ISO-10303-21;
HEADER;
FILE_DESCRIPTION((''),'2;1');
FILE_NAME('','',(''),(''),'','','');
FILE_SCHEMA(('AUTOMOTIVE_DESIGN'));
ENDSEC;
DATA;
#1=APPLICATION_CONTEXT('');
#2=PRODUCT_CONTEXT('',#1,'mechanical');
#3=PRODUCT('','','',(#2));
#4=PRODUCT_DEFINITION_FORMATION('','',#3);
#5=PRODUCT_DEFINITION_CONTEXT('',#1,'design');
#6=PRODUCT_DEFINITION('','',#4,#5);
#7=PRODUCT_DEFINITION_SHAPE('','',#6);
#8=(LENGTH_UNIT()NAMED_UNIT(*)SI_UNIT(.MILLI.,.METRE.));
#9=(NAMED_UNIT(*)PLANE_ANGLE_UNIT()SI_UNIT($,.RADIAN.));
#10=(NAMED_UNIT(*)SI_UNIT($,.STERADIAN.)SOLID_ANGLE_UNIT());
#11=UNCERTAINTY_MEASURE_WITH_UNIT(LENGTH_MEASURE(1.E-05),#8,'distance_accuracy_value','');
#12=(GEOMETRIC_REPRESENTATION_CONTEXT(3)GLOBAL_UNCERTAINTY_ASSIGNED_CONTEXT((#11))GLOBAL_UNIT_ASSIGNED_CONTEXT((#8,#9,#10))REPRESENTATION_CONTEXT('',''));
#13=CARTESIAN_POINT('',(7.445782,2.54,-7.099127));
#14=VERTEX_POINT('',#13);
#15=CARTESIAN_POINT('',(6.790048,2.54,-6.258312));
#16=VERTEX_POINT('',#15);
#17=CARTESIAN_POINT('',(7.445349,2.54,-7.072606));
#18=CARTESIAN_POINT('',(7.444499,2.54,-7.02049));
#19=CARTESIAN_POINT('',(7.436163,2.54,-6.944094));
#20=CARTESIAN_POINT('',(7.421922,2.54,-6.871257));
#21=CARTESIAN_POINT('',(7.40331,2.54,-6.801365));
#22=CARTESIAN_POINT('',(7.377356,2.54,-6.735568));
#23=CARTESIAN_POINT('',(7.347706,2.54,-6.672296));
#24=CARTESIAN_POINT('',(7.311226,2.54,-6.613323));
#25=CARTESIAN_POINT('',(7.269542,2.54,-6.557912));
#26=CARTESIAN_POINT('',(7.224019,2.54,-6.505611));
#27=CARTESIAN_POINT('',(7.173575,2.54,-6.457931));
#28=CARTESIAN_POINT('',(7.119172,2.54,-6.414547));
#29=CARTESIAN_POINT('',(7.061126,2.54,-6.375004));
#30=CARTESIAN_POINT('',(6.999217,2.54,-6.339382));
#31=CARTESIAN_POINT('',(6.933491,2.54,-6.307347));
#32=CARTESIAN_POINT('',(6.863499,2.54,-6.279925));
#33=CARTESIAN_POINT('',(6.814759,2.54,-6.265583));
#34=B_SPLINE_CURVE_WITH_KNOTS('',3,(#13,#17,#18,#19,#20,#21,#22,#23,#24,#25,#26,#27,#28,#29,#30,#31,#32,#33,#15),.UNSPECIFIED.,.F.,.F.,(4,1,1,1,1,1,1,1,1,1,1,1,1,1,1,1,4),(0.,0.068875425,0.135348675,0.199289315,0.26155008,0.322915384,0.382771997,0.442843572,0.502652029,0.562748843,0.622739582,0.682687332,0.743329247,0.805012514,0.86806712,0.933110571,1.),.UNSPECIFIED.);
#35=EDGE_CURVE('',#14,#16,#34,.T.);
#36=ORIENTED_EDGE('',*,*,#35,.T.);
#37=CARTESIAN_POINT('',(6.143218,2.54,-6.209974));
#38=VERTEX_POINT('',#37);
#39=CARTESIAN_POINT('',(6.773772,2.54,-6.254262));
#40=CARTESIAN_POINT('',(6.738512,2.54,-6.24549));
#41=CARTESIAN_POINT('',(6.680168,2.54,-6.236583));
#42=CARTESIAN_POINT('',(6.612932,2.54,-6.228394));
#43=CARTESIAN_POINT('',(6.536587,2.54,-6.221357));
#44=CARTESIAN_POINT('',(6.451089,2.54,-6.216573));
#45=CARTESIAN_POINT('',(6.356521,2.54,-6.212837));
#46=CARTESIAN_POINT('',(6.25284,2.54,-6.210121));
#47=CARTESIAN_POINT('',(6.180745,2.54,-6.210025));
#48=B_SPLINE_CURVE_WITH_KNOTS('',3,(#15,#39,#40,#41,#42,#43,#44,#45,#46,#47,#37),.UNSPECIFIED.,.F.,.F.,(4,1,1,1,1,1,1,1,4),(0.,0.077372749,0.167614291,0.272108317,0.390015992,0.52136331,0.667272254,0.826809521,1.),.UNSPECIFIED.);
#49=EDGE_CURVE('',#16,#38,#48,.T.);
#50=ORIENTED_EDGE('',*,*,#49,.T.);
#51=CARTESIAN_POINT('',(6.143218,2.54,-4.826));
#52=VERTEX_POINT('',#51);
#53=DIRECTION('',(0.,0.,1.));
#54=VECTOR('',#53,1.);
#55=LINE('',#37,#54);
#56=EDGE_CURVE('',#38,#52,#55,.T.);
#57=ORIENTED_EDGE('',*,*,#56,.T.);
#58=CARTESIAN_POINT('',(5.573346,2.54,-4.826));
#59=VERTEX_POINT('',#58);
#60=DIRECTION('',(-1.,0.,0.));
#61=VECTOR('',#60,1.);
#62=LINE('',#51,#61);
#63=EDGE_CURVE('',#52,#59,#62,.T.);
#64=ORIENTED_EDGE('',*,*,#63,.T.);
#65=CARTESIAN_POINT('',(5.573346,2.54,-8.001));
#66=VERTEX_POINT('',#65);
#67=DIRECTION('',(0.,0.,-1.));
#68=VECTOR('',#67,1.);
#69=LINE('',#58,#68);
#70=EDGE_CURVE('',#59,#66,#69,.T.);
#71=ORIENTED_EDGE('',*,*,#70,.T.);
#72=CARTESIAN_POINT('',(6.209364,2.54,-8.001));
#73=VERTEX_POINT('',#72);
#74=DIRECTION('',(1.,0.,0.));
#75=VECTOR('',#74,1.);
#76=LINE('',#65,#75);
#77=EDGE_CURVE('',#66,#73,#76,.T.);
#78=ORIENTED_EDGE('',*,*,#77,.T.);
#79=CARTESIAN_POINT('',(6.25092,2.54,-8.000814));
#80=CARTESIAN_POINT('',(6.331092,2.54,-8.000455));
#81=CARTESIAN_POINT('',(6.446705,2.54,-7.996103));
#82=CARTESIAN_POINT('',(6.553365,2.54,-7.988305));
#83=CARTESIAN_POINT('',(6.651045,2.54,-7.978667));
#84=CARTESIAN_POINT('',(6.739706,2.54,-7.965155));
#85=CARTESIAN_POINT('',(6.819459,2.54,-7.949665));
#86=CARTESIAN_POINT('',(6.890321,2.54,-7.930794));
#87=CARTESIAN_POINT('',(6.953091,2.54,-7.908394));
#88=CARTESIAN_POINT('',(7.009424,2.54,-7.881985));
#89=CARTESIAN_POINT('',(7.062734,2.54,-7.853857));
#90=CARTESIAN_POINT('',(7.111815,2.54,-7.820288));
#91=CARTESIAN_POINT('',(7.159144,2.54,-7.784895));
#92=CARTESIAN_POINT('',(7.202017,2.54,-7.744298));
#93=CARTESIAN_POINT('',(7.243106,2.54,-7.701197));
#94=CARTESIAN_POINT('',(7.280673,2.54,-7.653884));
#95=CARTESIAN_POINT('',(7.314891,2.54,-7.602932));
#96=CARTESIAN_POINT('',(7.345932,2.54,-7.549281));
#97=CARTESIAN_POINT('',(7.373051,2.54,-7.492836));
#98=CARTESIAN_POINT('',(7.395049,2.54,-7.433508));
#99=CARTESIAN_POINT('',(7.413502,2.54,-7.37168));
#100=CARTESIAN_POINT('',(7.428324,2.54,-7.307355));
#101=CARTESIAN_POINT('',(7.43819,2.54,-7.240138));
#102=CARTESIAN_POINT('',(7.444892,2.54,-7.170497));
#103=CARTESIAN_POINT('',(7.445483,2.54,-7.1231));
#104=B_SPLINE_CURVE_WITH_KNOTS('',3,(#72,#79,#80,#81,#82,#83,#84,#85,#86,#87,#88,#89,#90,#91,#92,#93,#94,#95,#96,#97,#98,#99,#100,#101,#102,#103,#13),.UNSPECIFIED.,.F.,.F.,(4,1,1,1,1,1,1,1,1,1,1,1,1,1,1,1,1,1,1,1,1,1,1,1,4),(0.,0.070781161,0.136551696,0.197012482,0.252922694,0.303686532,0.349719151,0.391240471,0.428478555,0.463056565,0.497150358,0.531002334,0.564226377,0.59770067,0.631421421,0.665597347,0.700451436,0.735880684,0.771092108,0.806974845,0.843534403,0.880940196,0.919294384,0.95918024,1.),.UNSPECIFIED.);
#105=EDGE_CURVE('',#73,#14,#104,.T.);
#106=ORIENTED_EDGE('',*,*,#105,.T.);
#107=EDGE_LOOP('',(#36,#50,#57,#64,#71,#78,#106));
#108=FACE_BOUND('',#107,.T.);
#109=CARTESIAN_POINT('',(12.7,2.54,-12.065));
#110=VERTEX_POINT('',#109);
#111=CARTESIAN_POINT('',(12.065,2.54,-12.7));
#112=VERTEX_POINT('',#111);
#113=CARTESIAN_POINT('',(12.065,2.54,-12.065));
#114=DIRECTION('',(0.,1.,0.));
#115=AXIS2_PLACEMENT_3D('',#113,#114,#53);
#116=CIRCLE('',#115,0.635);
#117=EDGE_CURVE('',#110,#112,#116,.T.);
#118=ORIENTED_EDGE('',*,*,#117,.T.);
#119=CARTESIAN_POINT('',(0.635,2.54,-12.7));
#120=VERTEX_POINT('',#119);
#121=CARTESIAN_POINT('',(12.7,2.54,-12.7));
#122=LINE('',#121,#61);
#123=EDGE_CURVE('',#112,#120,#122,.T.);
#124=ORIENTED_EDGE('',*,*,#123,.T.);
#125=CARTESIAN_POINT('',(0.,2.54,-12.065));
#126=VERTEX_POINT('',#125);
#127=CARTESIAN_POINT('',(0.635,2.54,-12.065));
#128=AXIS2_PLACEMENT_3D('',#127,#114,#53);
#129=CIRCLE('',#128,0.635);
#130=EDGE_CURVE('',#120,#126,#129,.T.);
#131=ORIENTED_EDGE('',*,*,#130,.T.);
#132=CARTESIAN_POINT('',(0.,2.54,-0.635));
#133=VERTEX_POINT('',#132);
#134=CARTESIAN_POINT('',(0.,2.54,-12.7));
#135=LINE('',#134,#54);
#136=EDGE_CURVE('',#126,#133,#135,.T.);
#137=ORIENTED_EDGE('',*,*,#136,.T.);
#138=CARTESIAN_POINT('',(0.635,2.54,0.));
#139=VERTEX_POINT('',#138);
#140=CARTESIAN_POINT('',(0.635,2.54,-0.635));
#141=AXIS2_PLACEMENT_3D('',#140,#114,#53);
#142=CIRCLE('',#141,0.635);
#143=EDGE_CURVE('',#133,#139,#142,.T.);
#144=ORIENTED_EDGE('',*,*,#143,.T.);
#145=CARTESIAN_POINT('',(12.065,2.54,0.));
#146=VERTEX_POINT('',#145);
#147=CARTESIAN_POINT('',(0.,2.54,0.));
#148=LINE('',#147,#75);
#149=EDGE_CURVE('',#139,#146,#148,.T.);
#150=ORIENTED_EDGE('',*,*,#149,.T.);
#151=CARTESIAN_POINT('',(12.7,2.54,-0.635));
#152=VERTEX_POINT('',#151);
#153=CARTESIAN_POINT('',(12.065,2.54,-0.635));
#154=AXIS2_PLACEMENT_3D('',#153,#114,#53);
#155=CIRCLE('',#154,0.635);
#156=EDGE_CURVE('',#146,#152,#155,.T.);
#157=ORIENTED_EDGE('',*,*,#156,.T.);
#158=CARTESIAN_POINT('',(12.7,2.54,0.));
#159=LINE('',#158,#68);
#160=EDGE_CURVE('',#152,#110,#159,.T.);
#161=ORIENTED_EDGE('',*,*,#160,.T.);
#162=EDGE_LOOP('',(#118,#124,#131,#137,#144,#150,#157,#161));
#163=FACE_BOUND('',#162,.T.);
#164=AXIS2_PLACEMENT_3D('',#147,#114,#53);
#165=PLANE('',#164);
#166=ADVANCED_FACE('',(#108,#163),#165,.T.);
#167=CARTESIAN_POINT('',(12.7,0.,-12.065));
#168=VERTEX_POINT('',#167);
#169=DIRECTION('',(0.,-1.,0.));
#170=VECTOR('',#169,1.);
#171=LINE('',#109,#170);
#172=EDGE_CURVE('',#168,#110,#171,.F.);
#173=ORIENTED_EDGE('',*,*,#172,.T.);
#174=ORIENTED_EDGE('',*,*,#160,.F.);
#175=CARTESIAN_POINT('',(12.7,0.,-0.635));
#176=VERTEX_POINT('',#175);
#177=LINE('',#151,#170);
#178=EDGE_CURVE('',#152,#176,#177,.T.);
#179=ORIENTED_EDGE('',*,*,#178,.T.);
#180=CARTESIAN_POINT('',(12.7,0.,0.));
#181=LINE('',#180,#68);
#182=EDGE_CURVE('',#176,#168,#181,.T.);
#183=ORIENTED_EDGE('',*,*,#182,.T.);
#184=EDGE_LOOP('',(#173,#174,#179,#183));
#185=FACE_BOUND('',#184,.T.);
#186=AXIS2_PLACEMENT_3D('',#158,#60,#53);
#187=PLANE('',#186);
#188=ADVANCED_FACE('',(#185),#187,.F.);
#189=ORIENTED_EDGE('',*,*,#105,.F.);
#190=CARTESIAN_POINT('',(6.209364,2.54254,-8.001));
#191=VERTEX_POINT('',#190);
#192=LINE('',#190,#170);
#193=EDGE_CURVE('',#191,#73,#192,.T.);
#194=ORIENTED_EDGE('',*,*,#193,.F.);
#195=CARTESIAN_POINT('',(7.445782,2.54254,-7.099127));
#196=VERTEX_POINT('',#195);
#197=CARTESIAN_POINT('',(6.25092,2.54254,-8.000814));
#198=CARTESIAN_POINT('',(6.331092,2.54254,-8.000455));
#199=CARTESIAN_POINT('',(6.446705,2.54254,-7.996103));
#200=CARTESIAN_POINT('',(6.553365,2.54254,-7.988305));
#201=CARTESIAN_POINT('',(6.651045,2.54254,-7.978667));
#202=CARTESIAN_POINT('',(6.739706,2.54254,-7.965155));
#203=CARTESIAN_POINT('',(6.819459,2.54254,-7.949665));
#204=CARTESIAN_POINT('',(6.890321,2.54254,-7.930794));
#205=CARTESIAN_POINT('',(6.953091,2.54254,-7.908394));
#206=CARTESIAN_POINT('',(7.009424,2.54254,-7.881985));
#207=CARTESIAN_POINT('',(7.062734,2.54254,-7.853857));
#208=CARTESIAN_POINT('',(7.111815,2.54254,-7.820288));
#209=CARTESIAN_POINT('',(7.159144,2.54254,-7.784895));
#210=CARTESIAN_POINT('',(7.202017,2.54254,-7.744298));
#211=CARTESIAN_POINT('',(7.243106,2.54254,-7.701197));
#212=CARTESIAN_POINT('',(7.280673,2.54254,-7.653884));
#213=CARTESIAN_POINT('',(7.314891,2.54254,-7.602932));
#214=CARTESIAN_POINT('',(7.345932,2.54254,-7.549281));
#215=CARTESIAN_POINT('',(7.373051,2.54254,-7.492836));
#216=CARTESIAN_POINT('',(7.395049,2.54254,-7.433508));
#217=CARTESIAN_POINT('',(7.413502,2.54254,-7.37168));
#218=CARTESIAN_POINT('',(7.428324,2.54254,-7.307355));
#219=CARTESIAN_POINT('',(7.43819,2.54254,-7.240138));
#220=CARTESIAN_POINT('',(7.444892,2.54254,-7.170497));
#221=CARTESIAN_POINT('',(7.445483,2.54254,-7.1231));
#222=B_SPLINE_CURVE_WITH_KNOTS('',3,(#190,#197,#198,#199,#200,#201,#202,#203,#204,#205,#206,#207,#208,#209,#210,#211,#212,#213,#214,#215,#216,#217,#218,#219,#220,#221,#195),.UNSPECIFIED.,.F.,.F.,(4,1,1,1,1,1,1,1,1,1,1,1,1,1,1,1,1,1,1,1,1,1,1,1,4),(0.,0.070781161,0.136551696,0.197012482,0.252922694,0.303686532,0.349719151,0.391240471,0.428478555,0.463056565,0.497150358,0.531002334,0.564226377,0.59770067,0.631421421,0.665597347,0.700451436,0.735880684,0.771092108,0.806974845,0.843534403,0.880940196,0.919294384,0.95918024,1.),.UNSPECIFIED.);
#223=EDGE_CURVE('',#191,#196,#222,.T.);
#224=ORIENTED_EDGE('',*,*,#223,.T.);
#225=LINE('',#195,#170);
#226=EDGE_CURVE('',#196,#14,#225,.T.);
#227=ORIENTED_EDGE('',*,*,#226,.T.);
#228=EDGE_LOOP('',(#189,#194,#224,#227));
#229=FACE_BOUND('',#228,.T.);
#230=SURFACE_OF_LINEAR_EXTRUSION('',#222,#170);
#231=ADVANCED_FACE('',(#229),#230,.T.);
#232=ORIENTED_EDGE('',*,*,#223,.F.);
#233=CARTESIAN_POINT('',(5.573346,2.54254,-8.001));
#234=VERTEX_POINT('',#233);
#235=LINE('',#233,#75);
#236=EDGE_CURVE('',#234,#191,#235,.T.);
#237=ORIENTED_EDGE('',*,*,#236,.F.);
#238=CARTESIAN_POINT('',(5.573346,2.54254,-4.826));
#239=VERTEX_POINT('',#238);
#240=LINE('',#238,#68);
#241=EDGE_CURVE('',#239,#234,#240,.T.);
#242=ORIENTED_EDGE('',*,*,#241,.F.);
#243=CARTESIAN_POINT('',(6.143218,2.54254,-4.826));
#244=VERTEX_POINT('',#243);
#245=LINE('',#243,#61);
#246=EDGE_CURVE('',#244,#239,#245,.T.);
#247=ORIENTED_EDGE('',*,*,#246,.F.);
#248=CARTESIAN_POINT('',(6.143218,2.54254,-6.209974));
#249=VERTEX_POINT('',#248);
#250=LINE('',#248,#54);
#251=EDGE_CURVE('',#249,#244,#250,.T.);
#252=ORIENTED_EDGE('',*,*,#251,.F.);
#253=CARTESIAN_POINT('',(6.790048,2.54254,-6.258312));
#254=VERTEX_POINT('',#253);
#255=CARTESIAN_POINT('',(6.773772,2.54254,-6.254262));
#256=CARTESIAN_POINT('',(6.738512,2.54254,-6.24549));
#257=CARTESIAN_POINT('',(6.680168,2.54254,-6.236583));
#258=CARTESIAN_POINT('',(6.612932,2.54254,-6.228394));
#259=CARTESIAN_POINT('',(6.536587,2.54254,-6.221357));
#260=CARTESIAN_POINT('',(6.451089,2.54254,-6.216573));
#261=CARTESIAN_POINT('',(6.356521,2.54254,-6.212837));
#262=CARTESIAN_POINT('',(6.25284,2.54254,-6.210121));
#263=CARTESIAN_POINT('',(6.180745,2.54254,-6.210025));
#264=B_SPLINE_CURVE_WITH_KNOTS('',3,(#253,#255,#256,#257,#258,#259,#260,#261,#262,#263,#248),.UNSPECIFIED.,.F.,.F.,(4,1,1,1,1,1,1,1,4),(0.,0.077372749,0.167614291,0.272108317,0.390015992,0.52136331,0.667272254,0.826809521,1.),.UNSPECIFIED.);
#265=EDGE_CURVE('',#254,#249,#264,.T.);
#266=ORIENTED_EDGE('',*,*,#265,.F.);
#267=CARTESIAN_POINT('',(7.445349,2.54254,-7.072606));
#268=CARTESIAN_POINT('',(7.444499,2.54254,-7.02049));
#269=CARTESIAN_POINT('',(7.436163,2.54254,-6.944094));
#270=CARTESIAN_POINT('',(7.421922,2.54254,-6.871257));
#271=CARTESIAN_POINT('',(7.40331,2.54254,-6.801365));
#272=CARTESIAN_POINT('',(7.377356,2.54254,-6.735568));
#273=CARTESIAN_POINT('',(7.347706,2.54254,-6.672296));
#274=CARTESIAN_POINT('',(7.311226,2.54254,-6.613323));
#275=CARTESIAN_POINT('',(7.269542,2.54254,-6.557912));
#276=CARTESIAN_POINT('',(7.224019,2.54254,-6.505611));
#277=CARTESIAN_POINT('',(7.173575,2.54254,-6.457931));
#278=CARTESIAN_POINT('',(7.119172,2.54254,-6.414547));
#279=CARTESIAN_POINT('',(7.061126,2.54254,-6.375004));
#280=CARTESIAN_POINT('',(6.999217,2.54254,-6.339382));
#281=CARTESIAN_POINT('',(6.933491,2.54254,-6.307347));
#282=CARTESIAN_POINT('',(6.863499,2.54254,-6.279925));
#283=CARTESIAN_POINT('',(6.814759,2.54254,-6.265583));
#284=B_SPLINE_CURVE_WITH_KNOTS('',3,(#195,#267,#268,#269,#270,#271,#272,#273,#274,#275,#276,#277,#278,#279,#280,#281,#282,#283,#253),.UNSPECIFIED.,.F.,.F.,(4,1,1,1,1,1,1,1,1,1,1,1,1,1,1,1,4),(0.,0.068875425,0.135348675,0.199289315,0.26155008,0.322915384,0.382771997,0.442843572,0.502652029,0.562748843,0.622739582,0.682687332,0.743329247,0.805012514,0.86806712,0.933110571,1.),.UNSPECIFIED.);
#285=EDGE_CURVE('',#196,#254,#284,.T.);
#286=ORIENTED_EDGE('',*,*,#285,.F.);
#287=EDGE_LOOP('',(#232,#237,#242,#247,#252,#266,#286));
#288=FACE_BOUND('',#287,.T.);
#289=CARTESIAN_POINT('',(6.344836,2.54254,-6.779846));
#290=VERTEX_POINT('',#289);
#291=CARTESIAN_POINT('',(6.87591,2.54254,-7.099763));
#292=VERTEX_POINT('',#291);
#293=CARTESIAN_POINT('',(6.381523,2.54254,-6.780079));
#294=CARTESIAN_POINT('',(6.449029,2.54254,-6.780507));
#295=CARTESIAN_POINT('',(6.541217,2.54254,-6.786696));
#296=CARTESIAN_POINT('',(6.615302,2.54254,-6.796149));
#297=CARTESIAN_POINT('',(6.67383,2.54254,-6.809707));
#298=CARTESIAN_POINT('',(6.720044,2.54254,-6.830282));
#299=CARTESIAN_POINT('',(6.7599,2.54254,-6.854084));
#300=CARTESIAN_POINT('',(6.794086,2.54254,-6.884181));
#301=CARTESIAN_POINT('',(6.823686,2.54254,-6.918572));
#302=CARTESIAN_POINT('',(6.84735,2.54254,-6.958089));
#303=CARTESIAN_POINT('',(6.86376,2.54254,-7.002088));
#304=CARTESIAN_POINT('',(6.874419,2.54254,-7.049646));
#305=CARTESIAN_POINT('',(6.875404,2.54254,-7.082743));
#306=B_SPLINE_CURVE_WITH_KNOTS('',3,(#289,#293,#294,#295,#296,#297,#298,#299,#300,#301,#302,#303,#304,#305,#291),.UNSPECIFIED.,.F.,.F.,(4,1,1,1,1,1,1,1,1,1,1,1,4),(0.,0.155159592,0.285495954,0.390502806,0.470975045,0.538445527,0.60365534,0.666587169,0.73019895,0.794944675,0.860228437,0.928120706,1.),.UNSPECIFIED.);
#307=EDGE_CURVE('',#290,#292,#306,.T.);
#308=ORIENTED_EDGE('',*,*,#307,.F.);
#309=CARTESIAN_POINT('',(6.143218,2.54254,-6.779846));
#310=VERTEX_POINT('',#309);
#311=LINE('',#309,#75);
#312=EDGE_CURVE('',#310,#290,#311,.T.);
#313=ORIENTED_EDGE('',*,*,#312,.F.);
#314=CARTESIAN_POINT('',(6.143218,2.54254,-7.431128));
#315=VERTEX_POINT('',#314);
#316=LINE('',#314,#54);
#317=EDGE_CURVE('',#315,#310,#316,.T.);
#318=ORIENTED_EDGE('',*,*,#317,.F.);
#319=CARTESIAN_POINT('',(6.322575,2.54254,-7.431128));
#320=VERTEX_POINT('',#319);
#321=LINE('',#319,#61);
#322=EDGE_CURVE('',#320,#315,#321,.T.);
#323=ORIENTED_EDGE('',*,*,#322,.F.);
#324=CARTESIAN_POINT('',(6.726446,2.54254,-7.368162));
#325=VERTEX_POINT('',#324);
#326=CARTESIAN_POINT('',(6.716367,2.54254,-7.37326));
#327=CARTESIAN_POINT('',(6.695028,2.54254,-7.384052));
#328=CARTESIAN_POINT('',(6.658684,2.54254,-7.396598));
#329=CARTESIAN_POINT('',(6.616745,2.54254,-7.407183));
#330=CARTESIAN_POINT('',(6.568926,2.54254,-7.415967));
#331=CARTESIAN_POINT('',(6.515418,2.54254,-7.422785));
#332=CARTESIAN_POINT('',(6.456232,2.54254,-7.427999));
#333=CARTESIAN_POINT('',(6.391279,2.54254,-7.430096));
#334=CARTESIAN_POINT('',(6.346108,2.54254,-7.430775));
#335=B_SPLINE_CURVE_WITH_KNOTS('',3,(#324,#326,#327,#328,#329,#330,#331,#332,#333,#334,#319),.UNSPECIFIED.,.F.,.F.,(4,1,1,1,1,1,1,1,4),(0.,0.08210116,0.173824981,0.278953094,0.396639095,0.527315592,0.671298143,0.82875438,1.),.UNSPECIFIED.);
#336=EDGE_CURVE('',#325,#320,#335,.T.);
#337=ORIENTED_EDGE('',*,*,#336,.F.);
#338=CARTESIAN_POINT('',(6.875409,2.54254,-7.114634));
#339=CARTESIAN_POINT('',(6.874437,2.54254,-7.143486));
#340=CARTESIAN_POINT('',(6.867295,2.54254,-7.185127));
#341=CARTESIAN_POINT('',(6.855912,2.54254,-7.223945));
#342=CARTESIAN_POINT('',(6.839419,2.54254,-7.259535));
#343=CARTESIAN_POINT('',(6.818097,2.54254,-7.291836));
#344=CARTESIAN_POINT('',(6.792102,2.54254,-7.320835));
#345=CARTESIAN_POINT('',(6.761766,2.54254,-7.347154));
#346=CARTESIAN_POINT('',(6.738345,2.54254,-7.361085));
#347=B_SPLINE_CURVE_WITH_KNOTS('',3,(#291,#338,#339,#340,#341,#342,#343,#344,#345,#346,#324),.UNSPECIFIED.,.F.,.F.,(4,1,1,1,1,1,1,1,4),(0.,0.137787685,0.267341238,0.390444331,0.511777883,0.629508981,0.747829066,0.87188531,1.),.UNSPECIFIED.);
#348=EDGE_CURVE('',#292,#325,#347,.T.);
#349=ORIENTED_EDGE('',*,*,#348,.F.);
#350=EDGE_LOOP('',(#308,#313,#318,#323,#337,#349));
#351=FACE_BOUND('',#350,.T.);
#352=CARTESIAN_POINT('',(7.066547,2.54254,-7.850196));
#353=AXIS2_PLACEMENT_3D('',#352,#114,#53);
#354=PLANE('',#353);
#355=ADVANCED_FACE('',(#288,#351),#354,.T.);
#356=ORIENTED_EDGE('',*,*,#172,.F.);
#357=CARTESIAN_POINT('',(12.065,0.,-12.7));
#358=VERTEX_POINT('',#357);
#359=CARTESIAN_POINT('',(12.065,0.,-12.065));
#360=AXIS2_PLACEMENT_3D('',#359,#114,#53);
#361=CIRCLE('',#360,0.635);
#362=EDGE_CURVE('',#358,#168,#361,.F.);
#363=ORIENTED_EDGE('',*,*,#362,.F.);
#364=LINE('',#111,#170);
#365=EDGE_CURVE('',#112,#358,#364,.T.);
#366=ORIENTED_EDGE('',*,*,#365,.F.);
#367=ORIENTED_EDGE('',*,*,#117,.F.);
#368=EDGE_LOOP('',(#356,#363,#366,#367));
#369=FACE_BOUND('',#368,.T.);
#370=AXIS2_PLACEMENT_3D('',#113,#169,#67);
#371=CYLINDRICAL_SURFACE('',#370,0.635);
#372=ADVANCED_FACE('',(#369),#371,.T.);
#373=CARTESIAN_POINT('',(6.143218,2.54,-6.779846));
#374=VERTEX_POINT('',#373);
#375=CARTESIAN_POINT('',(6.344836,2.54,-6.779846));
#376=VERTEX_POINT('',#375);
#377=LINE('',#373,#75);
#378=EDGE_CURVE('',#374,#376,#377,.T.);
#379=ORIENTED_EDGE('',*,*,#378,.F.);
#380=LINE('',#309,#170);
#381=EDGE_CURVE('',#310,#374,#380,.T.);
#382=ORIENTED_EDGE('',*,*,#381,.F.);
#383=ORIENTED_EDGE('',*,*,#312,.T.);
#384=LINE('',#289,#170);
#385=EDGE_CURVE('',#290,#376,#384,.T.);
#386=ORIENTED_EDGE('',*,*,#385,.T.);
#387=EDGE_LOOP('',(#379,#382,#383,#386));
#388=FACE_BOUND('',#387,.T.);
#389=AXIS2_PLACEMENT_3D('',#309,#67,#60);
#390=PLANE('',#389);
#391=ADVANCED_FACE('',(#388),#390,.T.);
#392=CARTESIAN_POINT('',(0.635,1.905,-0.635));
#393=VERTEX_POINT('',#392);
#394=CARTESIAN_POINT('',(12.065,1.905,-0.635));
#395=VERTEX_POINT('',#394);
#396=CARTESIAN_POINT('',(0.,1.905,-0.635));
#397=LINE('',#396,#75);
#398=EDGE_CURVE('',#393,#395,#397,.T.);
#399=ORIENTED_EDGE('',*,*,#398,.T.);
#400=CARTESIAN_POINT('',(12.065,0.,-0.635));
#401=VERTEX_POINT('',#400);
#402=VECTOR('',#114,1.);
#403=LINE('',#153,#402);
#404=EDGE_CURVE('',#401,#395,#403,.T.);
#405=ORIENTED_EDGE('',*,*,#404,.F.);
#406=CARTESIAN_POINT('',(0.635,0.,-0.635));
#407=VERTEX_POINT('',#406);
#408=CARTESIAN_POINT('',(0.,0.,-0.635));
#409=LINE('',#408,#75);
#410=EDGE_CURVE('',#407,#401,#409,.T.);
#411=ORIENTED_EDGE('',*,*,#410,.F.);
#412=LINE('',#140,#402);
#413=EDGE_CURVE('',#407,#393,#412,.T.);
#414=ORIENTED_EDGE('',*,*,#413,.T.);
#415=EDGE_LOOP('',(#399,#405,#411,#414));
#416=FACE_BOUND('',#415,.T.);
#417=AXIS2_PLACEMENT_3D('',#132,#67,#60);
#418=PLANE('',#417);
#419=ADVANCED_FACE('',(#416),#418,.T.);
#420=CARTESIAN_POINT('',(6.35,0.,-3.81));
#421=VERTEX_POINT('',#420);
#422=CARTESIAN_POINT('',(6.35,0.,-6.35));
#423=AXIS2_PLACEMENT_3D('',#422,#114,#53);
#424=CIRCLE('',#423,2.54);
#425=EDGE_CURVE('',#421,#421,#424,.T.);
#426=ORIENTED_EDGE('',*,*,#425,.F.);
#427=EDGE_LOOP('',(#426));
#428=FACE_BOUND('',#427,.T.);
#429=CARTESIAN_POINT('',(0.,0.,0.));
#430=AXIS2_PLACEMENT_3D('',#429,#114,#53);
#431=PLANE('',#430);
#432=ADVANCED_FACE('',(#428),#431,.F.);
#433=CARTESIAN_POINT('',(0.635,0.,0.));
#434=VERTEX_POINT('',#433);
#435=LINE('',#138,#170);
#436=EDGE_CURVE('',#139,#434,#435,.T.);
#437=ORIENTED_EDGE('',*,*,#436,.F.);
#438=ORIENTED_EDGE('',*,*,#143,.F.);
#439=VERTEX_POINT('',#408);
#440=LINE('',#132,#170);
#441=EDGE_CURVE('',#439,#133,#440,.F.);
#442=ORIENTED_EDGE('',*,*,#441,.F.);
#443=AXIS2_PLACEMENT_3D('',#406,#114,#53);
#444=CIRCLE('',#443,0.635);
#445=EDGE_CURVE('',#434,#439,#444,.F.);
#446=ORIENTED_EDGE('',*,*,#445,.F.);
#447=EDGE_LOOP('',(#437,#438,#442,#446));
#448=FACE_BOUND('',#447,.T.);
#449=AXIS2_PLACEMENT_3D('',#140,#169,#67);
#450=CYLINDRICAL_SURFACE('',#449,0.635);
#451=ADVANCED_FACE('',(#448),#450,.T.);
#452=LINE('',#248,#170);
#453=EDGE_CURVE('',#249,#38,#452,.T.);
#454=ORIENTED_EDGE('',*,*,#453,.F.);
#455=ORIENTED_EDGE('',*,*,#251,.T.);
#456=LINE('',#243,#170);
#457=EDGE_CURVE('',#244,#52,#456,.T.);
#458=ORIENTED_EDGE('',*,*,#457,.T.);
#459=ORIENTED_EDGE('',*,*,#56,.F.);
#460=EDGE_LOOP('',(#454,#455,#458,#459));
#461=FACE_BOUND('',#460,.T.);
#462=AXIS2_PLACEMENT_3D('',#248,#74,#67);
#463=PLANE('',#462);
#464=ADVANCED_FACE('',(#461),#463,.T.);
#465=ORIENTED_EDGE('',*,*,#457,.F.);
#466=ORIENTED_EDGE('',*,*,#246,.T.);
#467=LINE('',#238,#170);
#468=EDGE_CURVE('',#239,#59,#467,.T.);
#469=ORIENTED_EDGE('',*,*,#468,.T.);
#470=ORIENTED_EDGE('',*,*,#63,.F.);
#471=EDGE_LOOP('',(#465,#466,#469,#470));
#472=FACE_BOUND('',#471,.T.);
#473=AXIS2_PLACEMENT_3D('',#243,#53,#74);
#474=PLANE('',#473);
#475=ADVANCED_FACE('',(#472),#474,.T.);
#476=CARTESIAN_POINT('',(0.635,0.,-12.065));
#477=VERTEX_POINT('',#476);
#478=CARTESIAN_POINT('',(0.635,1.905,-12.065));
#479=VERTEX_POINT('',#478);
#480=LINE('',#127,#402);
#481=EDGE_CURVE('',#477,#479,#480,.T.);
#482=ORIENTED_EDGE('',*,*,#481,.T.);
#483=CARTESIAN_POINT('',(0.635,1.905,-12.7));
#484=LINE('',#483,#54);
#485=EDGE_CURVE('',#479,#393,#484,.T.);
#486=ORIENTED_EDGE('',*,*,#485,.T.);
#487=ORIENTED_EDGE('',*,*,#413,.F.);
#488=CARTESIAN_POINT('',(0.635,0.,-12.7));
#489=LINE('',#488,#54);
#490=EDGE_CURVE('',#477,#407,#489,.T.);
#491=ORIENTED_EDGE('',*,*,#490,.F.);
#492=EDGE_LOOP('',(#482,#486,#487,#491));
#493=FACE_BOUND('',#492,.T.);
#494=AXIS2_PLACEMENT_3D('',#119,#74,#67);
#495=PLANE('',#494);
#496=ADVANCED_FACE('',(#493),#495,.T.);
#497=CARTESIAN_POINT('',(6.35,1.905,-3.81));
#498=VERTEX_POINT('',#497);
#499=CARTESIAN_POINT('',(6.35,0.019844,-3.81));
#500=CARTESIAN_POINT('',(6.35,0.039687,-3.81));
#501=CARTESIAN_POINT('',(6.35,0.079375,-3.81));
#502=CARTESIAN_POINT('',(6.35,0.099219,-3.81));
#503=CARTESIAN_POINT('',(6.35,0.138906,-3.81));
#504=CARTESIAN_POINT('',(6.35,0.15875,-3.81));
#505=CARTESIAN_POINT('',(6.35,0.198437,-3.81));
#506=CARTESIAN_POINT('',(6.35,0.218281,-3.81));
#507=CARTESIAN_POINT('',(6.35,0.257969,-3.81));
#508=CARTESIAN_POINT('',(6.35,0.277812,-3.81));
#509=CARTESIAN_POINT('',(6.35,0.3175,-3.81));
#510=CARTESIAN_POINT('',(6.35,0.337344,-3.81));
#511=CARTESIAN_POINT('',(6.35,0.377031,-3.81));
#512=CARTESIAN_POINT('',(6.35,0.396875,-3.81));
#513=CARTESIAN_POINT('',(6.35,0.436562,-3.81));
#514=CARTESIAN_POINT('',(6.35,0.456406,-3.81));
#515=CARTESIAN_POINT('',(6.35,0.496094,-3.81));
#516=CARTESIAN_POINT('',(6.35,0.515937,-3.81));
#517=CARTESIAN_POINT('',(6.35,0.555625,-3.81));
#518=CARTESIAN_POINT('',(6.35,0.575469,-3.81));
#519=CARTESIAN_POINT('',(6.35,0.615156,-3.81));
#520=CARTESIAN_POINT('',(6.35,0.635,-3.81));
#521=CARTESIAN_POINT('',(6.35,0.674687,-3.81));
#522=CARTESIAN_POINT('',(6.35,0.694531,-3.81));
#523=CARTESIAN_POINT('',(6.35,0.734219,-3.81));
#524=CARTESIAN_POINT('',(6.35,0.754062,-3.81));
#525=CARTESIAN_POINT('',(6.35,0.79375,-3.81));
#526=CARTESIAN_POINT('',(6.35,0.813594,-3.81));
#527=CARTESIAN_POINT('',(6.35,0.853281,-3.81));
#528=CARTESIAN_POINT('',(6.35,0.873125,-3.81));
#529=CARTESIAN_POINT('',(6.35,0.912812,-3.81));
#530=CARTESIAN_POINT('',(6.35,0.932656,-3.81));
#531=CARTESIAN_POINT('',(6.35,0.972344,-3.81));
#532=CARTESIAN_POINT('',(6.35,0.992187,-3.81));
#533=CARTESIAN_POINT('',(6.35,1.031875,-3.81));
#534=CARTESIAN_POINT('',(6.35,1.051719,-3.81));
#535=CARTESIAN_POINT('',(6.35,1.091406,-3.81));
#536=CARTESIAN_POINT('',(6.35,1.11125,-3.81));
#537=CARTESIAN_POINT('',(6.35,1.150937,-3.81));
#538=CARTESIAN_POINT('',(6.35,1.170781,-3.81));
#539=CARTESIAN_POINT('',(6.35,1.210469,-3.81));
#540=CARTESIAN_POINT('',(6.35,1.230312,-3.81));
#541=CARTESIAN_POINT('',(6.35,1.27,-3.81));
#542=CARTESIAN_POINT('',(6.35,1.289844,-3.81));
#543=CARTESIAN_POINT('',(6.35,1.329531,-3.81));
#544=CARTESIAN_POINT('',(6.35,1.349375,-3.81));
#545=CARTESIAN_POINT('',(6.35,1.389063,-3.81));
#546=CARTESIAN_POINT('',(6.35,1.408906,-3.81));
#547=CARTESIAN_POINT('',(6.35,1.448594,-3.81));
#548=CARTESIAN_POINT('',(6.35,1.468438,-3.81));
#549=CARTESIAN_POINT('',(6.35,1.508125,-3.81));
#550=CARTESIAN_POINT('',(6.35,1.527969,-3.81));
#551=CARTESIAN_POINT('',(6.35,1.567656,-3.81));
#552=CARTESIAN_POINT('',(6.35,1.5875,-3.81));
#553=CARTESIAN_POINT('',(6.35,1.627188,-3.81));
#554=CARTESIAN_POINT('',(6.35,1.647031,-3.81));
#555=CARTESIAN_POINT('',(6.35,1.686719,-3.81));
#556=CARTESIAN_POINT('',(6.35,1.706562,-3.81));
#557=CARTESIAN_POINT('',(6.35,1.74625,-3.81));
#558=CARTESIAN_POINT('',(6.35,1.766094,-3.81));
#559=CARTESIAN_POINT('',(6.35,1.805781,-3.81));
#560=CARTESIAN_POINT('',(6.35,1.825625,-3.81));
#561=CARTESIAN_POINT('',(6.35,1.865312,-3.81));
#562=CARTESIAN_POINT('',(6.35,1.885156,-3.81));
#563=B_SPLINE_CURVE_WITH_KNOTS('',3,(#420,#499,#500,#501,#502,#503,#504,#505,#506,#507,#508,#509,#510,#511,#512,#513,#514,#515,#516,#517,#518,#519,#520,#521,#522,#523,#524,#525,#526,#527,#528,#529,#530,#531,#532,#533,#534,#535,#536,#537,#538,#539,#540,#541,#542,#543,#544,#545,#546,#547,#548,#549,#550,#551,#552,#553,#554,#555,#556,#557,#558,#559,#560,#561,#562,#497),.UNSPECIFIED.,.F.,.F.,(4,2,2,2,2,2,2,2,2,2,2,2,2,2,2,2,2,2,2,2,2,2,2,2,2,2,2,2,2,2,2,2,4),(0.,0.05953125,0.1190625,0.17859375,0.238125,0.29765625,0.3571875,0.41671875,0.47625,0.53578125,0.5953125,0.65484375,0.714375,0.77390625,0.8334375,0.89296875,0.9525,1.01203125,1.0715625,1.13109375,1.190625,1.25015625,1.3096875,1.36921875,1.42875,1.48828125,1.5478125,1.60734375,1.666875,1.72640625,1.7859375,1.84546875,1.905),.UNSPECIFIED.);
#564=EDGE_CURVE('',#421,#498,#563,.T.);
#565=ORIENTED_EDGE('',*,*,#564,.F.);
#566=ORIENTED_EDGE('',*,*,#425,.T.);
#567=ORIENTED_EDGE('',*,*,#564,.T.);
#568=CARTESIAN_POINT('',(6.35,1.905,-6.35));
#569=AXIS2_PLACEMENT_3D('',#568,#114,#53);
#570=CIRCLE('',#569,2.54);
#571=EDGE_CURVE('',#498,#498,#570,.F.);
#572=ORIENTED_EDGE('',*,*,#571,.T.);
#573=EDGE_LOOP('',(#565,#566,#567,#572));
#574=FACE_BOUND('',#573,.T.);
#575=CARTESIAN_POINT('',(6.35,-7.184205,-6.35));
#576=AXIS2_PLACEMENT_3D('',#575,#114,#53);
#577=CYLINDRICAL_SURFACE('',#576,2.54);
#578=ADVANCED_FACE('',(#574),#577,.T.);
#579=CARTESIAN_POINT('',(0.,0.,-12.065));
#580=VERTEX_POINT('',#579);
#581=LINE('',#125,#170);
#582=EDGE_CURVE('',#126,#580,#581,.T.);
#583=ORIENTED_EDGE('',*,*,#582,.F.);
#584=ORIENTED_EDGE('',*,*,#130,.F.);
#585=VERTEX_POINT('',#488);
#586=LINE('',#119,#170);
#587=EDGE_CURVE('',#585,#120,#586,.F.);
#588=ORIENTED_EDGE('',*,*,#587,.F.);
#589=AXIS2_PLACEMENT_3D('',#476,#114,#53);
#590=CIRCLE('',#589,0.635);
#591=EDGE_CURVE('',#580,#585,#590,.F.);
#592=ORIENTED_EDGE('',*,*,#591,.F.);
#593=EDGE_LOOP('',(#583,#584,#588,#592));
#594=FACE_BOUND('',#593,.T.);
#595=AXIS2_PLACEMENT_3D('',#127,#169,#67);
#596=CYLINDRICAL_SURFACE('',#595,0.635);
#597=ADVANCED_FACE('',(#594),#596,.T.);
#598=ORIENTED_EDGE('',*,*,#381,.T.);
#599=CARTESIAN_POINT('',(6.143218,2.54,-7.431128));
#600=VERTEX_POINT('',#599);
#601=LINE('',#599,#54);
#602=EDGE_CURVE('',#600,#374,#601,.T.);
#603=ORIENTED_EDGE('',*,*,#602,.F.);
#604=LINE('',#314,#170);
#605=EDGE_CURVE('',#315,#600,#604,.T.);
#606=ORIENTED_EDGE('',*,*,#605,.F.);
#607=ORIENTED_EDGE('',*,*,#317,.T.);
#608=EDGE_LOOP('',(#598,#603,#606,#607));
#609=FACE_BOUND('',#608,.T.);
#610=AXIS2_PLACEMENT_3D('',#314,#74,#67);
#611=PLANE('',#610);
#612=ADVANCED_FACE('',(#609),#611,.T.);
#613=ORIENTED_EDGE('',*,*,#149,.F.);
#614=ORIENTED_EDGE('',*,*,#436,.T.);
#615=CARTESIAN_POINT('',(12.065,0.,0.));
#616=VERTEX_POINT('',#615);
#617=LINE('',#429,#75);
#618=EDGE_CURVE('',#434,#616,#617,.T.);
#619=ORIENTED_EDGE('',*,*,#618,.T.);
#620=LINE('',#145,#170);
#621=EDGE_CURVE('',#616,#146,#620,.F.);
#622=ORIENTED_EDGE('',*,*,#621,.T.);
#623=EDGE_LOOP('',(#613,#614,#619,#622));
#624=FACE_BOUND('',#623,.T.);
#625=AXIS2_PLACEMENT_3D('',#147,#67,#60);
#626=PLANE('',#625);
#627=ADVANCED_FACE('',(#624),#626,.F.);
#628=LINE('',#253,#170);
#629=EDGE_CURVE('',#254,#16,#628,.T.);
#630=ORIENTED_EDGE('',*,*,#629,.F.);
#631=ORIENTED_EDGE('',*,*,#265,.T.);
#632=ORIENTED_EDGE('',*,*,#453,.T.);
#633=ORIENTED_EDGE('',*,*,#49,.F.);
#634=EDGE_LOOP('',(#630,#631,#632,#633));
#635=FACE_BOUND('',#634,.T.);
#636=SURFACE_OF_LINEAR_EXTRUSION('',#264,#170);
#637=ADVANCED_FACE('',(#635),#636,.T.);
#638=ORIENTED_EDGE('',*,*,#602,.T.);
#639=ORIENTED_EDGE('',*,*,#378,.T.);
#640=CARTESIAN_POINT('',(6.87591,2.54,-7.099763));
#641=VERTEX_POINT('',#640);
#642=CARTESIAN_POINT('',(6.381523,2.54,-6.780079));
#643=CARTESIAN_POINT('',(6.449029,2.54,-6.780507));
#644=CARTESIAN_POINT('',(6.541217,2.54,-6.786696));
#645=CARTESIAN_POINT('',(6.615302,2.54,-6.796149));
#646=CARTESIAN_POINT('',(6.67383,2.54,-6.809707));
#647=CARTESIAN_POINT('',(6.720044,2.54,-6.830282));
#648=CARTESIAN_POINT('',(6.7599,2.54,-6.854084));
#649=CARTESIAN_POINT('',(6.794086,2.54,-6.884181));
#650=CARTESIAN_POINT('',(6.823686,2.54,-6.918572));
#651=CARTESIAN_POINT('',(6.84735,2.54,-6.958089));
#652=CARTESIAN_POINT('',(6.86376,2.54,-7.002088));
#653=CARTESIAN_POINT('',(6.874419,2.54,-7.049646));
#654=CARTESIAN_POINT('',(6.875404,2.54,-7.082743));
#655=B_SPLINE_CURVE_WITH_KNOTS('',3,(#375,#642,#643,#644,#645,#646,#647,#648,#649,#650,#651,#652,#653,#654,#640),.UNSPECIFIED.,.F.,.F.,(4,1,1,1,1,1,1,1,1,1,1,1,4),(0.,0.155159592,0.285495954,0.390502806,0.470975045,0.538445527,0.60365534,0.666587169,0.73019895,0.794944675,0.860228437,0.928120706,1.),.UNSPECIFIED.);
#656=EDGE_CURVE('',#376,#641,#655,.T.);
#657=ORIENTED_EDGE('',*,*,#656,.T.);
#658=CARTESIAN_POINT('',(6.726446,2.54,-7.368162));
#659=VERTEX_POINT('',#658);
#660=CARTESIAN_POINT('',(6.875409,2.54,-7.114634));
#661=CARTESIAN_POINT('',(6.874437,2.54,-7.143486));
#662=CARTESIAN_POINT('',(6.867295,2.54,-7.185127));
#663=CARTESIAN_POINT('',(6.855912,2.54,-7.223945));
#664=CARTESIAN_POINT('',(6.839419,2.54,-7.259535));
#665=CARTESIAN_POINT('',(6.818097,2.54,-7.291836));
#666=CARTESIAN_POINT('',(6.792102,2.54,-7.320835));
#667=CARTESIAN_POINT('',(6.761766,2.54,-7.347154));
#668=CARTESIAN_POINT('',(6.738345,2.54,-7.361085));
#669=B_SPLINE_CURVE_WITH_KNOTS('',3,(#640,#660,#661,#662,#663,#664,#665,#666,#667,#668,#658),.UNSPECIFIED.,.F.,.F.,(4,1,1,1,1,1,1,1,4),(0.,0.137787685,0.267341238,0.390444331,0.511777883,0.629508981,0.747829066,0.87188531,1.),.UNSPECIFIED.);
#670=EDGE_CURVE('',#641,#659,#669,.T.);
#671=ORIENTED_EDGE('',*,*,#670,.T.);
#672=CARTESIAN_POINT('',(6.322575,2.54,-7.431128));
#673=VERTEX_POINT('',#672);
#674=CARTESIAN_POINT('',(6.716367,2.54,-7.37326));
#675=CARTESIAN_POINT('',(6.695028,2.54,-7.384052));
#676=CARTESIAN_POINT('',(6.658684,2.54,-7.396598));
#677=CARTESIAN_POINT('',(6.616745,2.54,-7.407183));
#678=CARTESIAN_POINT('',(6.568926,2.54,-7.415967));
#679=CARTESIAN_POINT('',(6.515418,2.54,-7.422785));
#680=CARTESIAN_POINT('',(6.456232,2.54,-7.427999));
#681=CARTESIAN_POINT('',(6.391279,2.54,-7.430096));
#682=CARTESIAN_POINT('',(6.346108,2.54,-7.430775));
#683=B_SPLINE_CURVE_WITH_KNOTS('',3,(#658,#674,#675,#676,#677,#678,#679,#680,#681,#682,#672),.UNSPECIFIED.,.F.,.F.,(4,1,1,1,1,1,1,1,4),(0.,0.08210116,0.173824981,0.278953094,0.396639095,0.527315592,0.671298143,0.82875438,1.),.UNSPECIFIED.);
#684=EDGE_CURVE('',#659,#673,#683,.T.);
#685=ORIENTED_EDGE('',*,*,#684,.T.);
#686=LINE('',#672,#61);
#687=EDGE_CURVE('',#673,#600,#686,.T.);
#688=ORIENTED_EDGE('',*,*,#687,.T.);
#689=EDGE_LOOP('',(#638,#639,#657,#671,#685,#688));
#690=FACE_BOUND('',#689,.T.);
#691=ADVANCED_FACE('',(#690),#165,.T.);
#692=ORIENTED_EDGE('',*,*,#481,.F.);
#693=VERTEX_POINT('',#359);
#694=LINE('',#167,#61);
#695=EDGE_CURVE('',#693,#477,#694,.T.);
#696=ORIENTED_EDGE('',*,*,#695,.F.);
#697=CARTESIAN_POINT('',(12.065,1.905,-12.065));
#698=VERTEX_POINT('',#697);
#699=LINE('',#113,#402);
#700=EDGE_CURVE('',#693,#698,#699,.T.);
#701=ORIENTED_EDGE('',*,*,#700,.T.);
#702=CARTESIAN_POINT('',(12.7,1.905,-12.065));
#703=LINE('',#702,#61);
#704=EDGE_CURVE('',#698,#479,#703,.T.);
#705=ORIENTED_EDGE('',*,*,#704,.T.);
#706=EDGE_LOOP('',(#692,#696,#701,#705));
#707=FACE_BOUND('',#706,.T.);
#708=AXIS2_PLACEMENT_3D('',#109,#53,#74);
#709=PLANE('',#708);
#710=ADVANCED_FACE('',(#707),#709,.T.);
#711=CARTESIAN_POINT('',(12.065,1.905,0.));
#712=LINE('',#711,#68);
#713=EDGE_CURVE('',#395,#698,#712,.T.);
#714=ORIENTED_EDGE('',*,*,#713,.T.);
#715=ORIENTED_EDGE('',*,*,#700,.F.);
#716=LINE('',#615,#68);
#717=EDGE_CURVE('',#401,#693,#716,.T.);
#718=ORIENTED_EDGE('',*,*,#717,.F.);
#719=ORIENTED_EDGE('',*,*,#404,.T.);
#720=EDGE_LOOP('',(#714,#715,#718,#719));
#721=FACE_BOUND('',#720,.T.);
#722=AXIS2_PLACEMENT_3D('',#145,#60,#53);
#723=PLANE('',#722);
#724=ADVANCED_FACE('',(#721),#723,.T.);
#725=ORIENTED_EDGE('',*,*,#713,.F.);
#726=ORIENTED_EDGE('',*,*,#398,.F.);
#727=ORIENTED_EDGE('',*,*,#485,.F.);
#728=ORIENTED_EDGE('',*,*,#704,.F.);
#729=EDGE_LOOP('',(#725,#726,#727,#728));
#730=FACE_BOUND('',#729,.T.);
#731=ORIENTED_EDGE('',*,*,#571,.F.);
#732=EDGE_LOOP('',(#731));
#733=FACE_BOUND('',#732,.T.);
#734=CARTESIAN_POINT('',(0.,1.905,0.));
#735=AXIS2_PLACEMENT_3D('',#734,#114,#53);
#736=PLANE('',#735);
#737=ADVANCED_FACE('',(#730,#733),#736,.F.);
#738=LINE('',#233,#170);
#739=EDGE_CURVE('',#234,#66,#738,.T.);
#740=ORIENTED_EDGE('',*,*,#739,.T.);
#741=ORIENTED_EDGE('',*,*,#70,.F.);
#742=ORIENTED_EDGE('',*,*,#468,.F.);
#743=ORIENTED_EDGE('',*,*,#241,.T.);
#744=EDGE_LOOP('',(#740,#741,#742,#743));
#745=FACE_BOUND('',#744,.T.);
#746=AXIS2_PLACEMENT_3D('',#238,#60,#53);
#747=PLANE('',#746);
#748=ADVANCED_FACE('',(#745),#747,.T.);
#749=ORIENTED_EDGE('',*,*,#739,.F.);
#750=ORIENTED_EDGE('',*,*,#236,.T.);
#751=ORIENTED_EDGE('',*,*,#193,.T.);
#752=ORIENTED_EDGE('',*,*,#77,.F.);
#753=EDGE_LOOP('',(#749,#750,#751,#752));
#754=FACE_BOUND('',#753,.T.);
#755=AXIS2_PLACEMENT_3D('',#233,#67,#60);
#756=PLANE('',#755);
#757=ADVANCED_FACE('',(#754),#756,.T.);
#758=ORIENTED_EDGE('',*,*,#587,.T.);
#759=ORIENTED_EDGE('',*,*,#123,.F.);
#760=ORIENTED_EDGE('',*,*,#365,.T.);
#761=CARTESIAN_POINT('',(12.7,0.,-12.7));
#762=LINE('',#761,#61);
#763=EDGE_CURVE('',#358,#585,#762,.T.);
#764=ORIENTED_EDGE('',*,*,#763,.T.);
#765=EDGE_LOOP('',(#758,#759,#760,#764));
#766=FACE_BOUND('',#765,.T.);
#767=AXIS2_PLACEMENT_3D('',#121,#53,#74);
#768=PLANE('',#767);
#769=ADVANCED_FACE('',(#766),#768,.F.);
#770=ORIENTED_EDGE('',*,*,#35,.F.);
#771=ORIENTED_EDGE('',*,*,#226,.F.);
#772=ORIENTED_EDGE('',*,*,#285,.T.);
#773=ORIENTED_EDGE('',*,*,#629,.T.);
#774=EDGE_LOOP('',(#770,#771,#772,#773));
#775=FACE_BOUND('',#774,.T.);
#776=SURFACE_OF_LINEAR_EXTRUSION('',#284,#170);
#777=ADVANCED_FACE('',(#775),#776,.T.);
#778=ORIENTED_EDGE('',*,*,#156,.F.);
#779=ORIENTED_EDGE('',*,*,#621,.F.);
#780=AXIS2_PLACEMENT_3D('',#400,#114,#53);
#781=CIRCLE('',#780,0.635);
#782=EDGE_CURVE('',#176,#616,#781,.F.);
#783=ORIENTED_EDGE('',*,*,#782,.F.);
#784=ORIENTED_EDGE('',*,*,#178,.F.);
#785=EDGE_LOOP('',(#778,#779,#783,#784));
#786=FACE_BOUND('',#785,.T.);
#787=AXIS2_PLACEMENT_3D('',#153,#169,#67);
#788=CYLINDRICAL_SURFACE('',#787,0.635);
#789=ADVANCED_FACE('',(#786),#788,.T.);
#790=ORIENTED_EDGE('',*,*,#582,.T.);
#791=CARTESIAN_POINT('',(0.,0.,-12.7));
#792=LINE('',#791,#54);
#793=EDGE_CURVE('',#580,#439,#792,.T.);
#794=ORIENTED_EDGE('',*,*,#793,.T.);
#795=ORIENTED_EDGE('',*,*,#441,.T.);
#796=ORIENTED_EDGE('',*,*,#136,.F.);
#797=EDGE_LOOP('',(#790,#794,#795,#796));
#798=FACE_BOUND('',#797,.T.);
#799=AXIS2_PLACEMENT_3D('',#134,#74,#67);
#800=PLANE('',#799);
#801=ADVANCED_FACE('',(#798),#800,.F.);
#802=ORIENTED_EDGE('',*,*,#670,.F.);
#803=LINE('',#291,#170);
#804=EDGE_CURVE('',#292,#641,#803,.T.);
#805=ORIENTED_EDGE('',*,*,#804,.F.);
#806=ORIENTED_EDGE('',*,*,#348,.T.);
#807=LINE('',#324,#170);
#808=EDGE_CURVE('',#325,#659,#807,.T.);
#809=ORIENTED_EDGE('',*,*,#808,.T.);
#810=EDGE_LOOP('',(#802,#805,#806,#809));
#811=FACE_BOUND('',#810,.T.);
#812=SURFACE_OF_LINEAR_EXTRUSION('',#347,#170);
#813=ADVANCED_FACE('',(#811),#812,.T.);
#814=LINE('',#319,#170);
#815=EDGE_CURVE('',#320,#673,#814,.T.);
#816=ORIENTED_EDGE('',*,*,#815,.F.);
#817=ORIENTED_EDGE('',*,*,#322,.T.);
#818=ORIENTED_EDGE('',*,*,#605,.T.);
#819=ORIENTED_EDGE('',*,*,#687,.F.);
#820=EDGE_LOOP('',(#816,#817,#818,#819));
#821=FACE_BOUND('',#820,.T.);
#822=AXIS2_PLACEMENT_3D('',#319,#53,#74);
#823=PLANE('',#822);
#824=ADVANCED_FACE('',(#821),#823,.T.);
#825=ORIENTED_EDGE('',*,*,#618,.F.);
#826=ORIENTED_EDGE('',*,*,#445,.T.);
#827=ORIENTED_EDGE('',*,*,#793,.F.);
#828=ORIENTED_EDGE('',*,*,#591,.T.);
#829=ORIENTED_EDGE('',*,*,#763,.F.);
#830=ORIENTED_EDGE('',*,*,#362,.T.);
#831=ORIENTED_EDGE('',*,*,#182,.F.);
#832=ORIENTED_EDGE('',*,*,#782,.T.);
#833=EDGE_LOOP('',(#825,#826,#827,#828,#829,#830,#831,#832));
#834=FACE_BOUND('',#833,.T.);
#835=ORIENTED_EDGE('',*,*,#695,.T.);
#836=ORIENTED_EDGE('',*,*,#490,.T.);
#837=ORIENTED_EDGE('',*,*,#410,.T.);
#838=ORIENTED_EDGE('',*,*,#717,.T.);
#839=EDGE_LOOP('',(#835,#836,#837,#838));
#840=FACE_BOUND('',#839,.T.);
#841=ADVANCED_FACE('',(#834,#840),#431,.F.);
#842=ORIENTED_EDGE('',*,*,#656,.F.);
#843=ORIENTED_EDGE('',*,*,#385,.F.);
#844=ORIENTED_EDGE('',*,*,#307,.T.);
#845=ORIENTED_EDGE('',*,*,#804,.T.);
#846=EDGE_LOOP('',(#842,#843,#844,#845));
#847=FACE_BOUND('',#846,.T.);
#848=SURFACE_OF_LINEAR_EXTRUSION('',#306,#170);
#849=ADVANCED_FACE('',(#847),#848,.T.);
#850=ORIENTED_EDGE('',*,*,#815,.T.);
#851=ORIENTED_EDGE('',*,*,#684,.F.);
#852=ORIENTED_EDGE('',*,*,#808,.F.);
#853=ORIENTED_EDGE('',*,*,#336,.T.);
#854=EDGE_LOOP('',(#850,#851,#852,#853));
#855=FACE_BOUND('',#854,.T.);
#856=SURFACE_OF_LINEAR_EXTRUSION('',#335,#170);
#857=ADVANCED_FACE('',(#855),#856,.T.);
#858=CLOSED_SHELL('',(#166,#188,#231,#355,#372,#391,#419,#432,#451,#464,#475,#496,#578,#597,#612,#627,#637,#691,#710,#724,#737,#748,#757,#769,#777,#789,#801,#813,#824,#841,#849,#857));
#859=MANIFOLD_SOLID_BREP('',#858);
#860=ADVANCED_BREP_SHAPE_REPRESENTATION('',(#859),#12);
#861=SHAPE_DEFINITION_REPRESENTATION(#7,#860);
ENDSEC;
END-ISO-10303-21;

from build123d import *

# Parameters (mm, degrees)
SKETCH1_W           = 12.7
SKETCH1_H           = 12.7
BOSS_EXTRUDE1_DEPTH = 2.54
FILLET1_R           = 0.635
SHELL1_START        = 0.635
SHELL1_OUTLINE_W    = 1.905
SHELL1_OUTLINE_H    = 11.43
SHELL1_DEPTH        = 11.43
SKETCH2_R           = 2.54
BOSS_EXTRUDE2_DEPTH = 1.905
BOSS_EXTRUDE3_DEPTH = 0.00254


# Read off the part's stored shape, not the designer's step: Shell1
with BuildPart() as part:
    # Sketch1 → Boss-Extrude1 (new body)
    with BuildSketch(Plane(origin=(0, 0, 0), x_dir=(1, 0, 0), z_dir=(0, 1, 0))):
        with Locations((6.35, 6.35)):
            Rectangle(SKETCH1_W, SKETCH1_H)
    extrude(amount=BOSS_EXTRUDE1_DEPTH)

    # Fillet1
    fillet1_edges = [part.edges().sort_by_distance(p)[0] for p in [
        (0, 1.27, -12.7),
        (12.7, 1.27, -12.7),
        (12.7, 1.27, 0),
        (0, 1.27, 0),
    ]]
    fillet(fillet1_edges, radius=FILLET1_R)

    # Shell1 outline → Shell1 (cut)
    with BuildSketch(Plane.YZ.offset(SHELL1_START)):
        with Locations((0.9525, -6.35)):
            Rectangle(SHELL1_OUTLINE_W, SHELL1_OUTLINE_H)
    extrude(amount=SHELL1_DEPTH, mode=Mode.SUBTRACT)

    # Sketch2 → Boss-Extrude2 (add)
    with BuildSketch(Plane(origin=(0, 1.905, 0), x_dir=(-1, 0, 0), z_dir=(0, -1, 0))):
        with Locations(Location((-6.35, 6.35, 0), (0, 0, 270))):
            Circle(SKETCH2_R)
    extrude(amount=BOSS_EXTRUDE2_DEPTH)

    # Sketch3 → Boss-Extrude3 (add)
    with BuildSketch(Plane(origin=(0, 2.54, 0), x_dir=(1, 0, 0), z_dir=(0, 1, 0))):
        with BuildLine():
            Line((5.573346154, 8.001), (6.209363782, 8.001))
            add(Edge.make_bspline(
                [(6.209363782, 8.001), (6.250920349, 8.000813984), (6.331091677, 8.00045512), (6.446705328, 7.996103418), (6.553364582, 7.988304902), (6.651044933, 7.978667169), (6.739706219, 7.965155443), (6.81945947, 7.949665308), (6.890321237, 7.930793814), (6.95309059, 7.908393613), (7.009424058, 7.88198465), (7.062733687, 7.85385722), (7.111814675, 7.820288125), (7.159144287, 7.784895298), (7.202016608, 7.744297677), (7.243106269, 7.701197093), (7.280673012, 7.653884211), (7.314890906, 7.602931741), (7.345931809, 7.549281068), (7.373051219, 7.492836279), (7.395048965, 7.433508057), (7.413502339, 7.371680187), (7.428324268, 7.307355365), (7.438190216, 7.240137987), (7.444891665, 7.17049739), (7.445482975, 7.123099955), (7.445782051, 7.099127003)],
                knots=[0, 0, 0, 0, 1.698747864, 3.27724071, 4.728299578, 6.070144658, 7.288476769, 8.393259625, 9.389771311, 10.283485332, 11.113357557, 11.931608583, 12.74405601, 13.541433047, 14.344816069, 15.154114104, 15.974336324, 16.810834471, 17.661136416, 18.50621059, 19.367396281, 20.244825668, 21.142564693, 22.063065223, 23.020325768, 24, 24, 24, 24], degree=3))
            add(Edge.make_bspline(
                [(7.445782051, 7.099127003), (7.445349325, 7.072606297), (7.444498965, 7.02048985), (7.436162698, 6.944093533), (7.421921719, 6.871256561), (7.403309504, 6.801364688), (7.377356095, 6.735567789), (7.347705543, 6.672295931), (7.31122596, 6.613323062), (7.269542204, 6.557911502), (7.224018788, 6.50561073), (7.173574986, 6.457930831), (7.11917228, 6.414546773), (7.061125587, 6.375003888), (6.999216983, 6.339381942), (6.933491138, 6.307347374), (6.863499238, 6.279924749), (6.814758985, 6.265582938), (6.790047877, 6.258311699)],
                knots=[0, 0, 0, 0, 1.102006807, 2.165578795, 3.188629044, 4.184801286, 5.166646146, 6.124351954, 7.085497154, 8.042432466, 9.003981491, 9.963833307, 10.922997304, 11.89326795, 12.880200226, 13.889073926, 14.929769137, 16, 16, 16, 16], degree=3))
            add(Edge.make_bspline(
                [(6.790047877, 6.258311699), (6.773771719, 6.254262164), (6.738512321, 6.245489569), (6.680167701, 6.236583183), (6.612931652, 6.228394308), (6.536586757, 6.221356962), (6.451089, 6.216573206), (6.356521166, 6.212837306), (6.252840398, 6.210120921), (6.180744892, 6.210024531), (6.143217949, 6.209974359)],
                knots=[0, 0, 0, 0, 0.618981996, 1.340914327, 2.176866532, 3.120127938, 4.170906482, 5.338178032, 6.614476169, 8, 8, 8, 8], degree=3))
            Line((6.143217949, 6.209974359), (6.143217949, 4.826))
            Line((6.143217949, 4.826), (5.573346154, 4.826))
            Line((5.573346154, 4.826), (5.573346154, 8.001))
        make_face()
        with BuildLine():
            Line((6.143217949, 6.779846154), (6.344835537, 6.779846154))
            add(Edge.make_bspline(
                [(6.344835537, 6.779846154), (6.38152304, 6.780078781), (6.449028591, 6.780506819), (6.541217335, 6.786696491), (6.615301984, 6.796149371), (6.673830231, 6.809706987), (6.720043827, 6.830282464), (6.759900159, 6.854084417), (6.794085953, 6.884181333), (6.823685819, 6.918572209), (6.84735002, 6.958089049), (6.863759911, 7.002088399), (6.874419453, 7.049645784), (6.875403961, 7.082742577), (6.875910256, 7.099763021)],
                knots=[0, 0, 0, 0, 1.8619151, 3.425951444, 4.686033666, 5.651700536, 6.461346321, 7.243864085, 7.999046032, 8.762387399, 9.539336099, 10.322741239, 11.137448474, 12, 12, 12, 12], degree=3))
            add(Edge.make_bspline(
                [(6.875910256, 7.099763021), (6.875409169, 7.114633561), (6.874436938, 7.143485985), (6.867294669, 7.185127188), (6.855911946, 7.22394538), (6.839418817, 7.259535156), (6.818097108, 7.291836043), (6.792101629, 7.320835316), (6.761765954, 7.34715402), (6.73834504, 7.361084912), (6.726446114, 7.36816246)],
                knots=[0, 0, 0, 0, 1.102301479, 2.1387299, 3.123554645, 4.094223062, 5.036071848, 5.982632524, 6.975082478, 8, 8, 8, 8], degree=3))
            add(Edge.make_bspline(
                [(6.726446114, 7.36816246), (6.716367037, 7.373259738), (6.695027566, 7.384051721), (6.658684377, 7.39659819), (6.616744892, 7.407182518), (6.568925973, 7.415967409), (6.515418382, 7.422785396), (6.456231666, 7.427999451), (6.391278727, 7.430096225), (6.346107844, 7.430774724), (6.32257492, 7.431128205)],
                knots=[0, 0, 0, 0, 0.656809284, 1.390599849, 2.23162475, 3.173112763, 4.218524733, 5.370385145, 6.63003504, 8, 8, 8, 8], degree=3))
            Line((6.32257492, 7.431128205), (6.143217949, 7.431128205))
            Line((6.143217949, 7.431128205), (6.143217949, 6.779846154))
        make_face(mode=Mode.SUBTRACT)
    extrude(amount=BOSS_EXTRUDE3_DEPTH)


solid = part.part
